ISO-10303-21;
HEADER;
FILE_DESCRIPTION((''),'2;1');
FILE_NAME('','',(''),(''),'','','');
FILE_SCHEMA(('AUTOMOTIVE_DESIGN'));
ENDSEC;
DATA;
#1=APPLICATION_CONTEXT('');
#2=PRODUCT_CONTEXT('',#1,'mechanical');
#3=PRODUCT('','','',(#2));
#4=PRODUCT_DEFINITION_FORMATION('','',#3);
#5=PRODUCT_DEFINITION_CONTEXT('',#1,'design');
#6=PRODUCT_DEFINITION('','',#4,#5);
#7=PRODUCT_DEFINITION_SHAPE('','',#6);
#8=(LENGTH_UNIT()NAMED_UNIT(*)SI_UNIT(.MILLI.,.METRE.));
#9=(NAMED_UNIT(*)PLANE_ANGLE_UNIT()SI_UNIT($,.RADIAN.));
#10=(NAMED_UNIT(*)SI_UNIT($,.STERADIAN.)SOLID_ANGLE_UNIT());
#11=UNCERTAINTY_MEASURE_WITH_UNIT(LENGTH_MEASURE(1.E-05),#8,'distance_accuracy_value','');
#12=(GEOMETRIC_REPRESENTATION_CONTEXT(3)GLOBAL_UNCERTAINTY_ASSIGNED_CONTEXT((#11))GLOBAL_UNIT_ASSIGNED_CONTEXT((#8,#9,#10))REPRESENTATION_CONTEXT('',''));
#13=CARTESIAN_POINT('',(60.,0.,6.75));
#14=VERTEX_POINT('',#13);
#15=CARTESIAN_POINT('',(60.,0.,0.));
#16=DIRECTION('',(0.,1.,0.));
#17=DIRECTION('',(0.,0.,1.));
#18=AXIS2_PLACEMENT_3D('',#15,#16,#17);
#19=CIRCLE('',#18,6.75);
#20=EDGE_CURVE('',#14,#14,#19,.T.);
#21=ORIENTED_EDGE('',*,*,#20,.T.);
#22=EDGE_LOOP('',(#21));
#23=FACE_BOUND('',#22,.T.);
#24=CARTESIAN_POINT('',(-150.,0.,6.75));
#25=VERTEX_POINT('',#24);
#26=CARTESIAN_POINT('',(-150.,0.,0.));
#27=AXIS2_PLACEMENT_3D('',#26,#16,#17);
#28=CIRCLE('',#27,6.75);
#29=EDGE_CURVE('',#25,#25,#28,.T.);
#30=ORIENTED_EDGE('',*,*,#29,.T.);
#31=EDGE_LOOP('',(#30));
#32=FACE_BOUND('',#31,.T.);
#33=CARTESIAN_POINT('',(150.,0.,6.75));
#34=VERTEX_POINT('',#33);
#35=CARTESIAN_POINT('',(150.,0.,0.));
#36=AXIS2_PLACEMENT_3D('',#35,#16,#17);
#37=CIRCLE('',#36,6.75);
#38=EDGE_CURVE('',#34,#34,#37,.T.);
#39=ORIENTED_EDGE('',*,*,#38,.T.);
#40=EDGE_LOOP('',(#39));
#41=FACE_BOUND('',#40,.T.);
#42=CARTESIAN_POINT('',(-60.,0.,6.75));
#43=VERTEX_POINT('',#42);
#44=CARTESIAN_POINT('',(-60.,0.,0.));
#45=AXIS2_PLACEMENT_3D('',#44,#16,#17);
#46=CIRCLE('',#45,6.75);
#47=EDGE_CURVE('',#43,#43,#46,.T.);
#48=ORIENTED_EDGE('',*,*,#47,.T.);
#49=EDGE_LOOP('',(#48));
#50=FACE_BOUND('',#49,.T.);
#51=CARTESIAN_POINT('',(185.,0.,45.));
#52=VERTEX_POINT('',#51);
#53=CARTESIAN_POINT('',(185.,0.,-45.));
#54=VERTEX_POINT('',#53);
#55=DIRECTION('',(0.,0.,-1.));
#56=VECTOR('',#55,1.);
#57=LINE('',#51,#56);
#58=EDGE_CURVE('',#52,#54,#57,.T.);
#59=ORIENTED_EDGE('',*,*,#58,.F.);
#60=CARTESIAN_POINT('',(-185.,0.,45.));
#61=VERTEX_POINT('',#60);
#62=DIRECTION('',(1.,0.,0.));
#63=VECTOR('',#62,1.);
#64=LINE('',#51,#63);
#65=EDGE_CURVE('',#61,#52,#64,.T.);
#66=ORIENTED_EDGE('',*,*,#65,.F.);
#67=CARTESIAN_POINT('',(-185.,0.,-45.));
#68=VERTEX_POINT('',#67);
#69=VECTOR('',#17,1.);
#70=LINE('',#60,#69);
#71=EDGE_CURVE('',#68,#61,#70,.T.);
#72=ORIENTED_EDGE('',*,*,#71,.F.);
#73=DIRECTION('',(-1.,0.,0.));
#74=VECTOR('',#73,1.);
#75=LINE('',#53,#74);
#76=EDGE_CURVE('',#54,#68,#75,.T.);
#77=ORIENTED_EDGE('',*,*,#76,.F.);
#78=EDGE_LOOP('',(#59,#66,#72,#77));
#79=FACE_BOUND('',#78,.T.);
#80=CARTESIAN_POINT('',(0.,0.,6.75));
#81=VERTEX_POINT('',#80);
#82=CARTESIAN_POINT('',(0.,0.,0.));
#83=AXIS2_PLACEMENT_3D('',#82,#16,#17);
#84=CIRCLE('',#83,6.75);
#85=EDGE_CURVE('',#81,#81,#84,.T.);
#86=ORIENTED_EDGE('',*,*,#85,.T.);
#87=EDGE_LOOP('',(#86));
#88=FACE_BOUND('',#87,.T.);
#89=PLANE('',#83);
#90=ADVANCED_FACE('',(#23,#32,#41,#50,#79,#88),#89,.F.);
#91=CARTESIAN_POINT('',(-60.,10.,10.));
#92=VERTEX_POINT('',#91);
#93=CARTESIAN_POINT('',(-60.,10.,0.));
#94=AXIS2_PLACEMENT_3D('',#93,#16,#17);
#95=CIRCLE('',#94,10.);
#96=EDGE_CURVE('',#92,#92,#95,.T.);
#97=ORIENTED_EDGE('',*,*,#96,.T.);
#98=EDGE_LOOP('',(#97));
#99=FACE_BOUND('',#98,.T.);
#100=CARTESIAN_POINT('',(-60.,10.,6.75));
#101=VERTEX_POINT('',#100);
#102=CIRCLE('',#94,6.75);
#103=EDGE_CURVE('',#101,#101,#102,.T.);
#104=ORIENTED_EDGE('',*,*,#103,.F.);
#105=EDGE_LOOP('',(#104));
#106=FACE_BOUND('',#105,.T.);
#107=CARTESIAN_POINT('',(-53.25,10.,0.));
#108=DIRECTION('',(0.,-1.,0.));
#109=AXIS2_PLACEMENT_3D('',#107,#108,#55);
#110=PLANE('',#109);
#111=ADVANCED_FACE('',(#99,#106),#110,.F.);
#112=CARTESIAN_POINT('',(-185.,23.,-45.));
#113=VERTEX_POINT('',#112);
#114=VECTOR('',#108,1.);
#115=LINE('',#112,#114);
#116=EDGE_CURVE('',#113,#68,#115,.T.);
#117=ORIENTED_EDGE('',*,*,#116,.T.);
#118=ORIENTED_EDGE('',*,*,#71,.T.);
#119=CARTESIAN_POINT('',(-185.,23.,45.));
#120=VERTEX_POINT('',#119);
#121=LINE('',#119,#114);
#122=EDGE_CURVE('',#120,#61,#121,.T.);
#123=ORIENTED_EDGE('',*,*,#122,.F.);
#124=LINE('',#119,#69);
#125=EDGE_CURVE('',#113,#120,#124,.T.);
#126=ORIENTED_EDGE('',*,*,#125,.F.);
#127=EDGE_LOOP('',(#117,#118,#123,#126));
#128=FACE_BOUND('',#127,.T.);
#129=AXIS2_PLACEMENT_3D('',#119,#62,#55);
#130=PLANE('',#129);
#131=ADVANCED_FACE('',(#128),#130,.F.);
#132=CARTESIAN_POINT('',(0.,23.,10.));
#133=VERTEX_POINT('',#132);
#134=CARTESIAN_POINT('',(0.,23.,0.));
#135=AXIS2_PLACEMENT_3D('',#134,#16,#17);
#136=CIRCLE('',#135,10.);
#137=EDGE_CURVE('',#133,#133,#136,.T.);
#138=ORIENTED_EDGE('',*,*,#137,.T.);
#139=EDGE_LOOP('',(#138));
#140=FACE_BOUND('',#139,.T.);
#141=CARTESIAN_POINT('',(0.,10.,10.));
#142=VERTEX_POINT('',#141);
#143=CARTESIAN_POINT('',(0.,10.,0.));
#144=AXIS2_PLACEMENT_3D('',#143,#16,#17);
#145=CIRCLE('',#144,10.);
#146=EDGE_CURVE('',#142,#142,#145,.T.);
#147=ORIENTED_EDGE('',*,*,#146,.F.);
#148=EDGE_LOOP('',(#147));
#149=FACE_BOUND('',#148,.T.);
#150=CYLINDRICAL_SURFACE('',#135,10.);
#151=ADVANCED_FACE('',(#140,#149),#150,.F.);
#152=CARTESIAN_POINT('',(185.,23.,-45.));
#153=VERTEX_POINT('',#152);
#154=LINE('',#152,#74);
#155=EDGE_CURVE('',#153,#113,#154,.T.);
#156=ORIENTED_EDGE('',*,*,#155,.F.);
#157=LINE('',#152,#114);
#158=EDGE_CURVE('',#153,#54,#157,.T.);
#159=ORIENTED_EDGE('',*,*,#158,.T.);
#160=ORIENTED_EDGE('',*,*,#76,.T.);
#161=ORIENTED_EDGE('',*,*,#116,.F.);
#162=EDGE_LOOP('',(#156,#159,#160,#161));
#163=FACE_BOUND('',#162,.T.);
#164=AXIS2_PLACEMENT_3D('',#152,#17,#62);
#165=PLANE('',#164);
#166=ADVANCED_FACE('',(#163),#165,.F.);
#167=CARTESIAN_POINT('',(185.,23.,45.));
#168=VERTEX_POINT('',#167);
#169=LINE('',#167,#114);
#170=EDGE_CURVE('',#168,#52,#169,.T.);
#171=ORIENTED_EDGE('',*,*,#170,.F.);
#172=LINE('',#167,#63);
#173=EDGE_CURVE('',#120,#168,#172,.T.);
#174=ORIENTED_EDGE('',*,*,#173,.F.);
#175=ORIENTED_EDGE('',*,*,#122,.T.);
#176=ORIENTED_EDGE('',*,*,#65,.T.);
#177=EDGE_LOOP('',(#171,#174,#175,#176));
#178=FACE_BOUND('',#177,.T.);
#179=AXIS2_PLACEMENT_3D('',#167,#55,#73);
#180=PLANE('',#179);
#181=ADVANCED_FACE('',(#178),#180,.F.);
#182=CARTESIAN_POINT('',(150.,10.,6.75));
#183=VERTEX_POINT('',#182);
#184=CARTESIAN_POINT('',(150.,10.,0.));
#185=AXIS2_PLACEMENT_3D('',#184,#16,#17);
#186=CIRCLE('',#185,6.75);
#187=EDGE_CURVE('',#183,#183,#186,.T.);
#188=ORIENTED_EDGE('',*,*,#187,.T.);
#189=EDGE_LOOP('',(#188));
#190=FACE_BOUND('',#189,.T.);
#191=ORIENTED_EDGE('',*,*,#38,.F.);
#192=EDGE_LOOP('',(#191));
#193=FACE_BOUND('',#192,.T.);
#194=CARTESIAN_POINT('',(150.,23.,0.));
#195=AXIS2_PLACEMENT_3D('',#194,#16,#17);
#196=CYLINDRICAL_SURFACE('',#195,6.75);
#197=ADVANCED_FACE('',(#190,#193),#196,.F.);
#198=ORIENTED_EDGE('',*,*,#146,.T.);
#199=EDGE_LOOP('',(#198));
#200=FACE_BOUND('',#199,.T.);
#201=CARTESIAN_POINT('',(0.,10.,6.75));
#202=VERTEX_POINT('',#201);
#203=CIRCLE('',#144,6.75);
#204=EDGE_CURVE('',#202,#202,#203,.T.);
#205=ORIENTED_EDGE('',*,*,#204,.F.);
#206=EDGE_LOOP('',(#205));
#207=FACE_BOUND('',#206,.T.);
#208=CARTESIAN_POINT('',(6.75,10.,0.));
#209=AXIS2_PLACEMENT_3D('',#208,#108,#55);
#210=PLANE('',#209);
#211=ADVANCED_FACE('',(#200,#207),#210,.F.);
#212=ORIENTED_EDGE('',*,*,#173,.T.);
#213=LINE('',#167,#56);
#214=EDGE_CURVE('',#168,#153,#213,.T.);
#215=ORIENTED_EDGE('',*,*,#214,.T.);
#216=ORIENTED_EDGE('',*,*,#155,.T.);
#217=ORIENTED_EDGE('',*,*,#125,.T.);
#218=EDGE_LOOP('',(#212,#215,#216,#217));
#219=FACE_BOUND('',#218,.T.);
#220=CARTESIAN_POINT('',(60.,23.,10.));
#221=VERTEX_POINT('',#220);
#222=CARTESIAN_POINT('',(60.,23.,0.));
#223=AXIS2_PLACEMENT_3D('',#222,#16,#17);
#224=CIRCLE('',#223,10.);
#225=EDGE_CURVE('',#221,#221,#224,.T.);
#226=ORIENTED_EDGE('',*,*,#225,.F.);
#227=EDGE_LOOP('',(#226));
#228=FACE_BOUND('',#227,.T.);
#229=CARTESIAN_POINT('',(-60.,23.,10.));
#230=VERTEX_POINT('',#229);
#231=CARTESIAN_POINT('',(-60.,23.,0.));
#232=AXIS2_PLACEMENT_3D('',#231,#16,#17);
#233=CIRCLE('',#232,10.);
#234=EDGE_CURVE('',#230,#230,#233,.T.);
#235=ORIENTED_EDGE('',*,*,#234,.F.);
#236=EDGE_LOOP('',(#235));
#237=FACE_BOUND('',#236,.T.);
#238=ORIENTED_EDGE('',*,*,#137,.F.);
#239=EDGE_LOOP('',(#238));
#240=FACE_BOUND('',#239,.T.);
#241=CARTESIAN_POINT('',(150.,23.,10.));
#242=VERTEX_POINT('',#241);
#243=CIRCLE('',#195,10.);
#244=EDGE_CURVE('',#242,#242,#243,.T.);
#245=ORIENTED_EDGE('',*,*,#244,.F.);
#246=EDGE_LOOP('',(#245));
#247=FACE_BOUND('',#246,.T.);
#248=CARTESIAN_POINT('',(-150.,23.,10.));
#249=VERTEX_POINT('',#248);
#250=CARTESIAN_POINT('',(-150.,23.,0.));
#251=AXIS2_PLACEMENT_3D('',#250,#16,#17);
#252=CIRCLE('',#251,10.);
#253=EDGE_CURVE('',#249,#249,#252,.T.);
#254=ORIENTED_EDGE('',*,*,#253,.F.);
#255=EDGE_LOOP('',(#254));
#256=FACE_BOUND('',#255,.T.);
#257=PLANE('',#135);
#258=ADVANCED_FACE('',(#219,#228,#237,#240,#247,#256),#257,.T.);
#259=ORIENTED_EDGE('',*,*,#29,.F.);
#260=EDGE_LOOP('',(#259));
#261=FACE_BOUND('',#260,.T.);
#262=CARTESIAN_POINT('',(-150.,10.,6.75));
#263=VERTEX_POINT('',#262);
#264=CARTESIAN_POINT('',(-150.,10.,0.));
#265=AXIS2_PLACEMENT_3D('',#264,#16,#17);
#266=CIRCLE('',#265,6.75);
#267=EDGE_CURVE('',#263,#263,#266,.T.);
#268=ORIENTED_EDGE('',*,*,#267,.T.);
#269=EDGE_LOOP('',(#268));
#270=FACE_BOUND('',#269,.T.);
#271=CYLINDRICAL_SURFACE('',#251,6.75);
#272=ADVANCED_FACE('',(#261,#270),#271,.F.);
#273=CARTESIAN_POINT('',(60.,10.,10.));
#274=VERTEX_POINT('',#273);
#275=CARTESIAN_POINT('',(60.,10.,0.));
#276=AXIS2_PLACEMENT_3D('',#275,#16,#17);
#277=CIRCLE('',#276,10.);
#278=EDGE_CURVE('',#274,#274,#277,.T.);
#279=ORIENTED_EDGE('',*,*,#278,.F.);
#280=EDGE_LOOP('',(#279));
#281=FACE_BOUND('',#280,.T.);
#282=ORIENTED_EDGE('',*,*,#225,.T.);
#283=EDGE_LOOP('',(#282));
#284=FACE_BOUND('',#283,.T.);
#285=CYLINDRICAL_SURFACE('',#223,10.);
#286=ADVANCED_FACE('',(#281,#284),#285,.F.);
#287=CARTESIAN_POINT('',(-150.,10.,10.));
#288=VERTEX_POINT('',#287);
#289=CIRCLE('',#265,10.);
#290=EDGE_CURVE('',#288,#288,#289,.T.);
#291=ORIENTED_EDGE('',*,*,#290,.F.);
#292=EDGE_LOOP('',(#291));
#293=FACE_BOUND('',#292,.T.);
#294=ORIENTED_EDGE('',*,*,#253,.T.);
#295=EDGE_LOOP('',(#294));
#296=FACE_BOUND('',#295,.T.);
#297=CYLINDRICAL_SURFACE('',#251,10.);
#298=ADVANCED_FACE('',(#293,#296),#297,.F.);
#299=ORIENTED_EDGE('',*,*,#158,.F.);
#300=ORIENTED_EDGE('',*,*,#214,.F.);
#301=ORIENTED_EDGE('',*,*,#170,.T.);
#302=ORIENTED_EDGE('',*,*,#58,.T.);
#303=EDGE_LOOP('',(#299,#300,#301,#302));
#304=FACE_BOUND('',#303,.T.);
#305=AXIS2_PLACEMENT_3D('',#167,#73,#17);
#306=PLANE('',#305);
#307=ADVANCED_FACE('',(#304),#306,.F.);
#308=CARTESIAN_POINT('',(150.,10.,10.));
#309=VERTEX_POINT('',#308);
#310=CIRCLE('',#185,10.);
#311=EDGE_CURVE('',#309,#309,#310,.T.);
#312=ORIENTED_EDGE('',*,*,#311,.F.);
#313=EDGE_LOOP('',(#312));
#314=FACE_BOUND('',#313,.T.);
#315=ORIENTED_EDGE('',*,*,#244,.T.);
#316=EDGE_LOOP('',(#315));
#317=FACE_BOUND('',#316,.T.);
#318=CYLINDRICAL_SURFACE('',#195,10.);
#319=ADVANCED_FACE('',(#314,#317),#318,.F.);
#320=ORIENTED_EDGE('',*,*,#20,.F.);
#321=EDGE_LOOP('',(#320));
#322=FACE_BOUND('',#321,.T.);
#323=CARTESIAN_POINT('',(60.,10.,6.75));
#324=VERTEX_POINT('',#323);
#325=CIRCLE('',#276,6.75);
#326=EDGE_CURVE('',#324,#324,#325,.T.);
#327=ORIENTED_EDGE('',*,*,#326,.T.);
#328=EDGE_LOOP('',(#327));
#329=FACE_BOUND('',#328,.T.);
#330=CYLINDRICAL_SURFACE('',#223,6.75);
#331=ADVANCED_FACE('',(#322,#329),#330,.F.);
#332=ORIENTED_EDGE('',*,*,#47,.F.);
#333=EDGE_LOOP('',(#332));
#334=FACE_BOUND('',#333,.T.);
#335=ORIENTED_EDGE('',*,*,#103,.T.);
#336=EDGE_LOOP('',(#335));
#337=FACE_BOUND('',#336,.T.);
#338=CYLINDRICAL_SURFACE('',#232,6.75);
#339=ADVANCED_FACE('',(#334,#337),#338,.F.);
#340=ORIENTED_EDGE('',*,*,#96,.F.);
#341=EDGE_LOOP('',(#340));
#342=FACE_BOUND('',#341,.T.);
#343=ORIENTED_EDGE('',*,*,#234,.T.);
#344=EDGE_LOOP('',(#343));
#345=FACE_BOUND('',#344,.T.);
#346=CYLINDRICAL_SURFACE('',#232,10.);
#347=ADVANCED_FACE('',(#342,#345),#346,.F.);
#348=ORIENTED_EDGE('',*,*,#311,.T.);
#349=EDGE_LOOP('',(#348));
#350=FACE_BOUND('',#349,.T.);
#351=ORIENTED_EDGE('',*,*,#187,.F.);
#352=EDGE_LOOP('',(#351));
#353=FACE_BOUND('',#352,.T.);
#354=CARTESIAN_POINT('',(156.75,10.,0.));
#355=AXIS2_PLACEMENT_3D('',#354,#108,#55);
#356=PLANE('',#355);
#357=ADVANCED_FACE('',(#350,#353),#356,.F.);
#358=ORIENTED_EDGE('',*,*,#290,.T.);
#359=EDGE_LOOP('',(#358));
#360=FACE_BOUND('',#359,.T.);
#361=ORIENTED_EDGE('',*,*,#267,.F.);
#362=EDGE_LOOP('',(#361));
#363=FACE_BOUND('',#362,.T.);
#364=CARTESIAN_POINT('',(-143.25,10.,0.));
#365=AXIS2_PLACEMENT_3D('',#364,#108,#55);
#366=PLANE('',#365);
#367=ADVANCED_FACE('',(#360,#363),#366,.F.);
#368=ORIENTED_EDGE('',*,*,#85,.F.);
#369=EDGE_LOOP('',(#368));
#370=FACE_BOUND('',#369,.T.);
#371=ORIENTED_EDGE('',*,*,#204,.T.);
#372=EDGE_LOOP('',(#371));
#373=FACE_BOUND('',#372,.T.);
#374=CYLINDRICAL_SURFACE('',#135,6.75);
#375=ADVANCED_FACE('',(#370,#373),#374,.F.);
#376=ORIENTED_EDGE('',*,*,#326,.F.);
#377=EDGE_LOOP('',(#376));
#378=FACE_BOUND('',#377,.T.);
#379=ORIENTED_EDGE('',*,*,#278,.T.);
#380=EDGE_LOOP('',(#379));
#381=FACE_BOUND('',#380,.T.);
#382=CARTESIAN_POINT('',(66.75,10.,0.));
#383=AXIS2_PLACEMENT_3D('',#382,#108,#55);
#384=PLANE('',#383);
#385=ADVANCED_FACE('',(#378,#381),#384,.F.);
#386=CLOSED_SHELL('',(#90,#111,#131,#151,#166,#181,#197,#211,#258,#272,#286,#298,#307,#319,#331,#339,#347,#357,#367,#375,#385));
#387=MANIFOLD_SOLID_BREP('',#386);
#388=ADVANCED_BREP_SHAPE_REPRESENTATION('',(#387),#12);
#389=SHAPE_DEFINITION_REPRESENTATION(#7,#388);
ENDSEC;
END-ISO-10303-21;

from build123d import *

# Parameters (mm, degrees)
SKETCH_1_W                          = 370
SKETCH_1_H                          = 90
EXTRUDE_1_DEPTH                     = 23
HOLE_WIZARD_M4_1_D                  = 13.5
HOLE_WIZARD_M4_1_CBORE_D            = 20
HOLE_WIZARD_M4_1_CBORE_DEPTH        = 13
PATTERN_LINEAR_1_COUNT              = 2
PATTERN_LINEAR_1_PITCH              = 90
PATTERN_LINEAR_2_COPY_1_D           = 13.5
PATTERN_LINEAR_2_COPY_1_CBORE_D     = 20
PATTERN_LINEAR_2_COPY_1_CBORE_DEPTH = 13
PATTERN_LINEAR_2_COPY_2_D           = 13.5
PATTERN_LINEAR_2_COPY_2_CBORE_D     = 20
PATTERN_LINEAR_2_COPY_2_CBORE_DEPTH = 13
PATTERN_START                       = 10
PATTERN_LINEAR_3_OUTLINE_R          = 10
PATTERN_LINEAR_3_DEPTH              = 13
PATTERN_LINEAR_3_2_OUTLINE_R        = 6.75
PATTERN_LINEAR_3_2_DEPTH            = 10


# Read off the part's stored shape, not the designer's step: 阵列(线性)3
with BuildPart() as part:
    # 草图1 → 凸台-拉伸1 (new body)
    with BuildSketch(Plane(origin=(0, 0, 0), x_dir=(1, 0, 0), z_dir=(0, 1, 0))):
        Rectangle(SKETCH_1_W, SKETCH_1_H)
    extrude(amount=EXTRUDE_1_DEPTH)

    # M4 六角头螺栓的柱形沉头孔1 (through all)
    with Locations(Plane(origin=(0, 23, 0), x_dir=(1, 0, 0), z_dir=(0, 1, 0))):
        with Locations((-150, 0)):
            hole_wizard_m4_1 = CounterBoreHole(HOLE_WIZARD_M4_1_D / 2, HOLE_WIZARD_M4_1_CBORE_D / 2, HOLE_WIZARD_M4_1_CBORE_DEPTH)

    # 阵列(线性)1: M4 六角头螺栓的柱形沉头孔1 ×2
    with Locations(*[(i * PATTERN_LINEAR_1_PITCH, 0, 0) for i in range(1, PATTERN_LINEAR_1_COUNT)]):
        add(hole_wizard_m4_1, mode=Mode.SUBTRACT)

    # 阵列(线性)2 copy 1 (through all)
    with Locations(Plane(origin=(150, 23, 0), x_dir=(1, 0, 0), z_dir=(0, 1, 0))):
        with Locations((-150, 0)):
            CounterBoreHole(PATTERN_LINEAR_2_COPY_1_D / 2, PATTERN_LINEAR_2_COPY_1_CBORE_D / 2, PATTERN_LINEAR_2_COPY_1_CBORE_DEPTH)

    # 阵列(线性)2 copy 2 (through all)
    with Locations(Plane(origin=(210, 23, 0), x_dir=(1, 0, 0), z_dir=(0, 1, 0))):
        with Locations((-150, 0)):
            CounterBoreHole(PATTERN_LINEAR_2_COPY_2_D / 2, PATTERN_LINEAR_2_COPY_2_CBORE_D / 2, PATTERN_LINEAR_2_COPY_2_CBORE_DEPTH)

    # 阵列(线性)3 outline → 阵列(线性)3 (cut)
    with BuildSketch(Plane(origin=(0, 0, 0), x_dir=(1, 0, 0), z_dir=(0, 1, 0)).offset(PATTERN_START)):
        with Locations((150, 0)):
            Circle(PATTERN_LINEAR_3_OUTLINE_R)
    extrude(amount=PATTERN_LINEAR_3_DEPTH, mode=Mode.SUBTRACT)

    # Pattern Linear 3 2 outline → Pattern Linear 3 2 (cut)
    with BuildSketch(Plane(origin=(0, 0, 0), x_dir=(1, 0, 0), z_dir=(0, 1, 0))):
        with Locations((150, 0)):
            Circle(PATTERN_LINEAR_3_2_OUTLINE_R)
    extrude(amount=PATTERN_LINEAR_3_2_DEPTH, mode=Mode.SUBTRACT)


solid = part.part
